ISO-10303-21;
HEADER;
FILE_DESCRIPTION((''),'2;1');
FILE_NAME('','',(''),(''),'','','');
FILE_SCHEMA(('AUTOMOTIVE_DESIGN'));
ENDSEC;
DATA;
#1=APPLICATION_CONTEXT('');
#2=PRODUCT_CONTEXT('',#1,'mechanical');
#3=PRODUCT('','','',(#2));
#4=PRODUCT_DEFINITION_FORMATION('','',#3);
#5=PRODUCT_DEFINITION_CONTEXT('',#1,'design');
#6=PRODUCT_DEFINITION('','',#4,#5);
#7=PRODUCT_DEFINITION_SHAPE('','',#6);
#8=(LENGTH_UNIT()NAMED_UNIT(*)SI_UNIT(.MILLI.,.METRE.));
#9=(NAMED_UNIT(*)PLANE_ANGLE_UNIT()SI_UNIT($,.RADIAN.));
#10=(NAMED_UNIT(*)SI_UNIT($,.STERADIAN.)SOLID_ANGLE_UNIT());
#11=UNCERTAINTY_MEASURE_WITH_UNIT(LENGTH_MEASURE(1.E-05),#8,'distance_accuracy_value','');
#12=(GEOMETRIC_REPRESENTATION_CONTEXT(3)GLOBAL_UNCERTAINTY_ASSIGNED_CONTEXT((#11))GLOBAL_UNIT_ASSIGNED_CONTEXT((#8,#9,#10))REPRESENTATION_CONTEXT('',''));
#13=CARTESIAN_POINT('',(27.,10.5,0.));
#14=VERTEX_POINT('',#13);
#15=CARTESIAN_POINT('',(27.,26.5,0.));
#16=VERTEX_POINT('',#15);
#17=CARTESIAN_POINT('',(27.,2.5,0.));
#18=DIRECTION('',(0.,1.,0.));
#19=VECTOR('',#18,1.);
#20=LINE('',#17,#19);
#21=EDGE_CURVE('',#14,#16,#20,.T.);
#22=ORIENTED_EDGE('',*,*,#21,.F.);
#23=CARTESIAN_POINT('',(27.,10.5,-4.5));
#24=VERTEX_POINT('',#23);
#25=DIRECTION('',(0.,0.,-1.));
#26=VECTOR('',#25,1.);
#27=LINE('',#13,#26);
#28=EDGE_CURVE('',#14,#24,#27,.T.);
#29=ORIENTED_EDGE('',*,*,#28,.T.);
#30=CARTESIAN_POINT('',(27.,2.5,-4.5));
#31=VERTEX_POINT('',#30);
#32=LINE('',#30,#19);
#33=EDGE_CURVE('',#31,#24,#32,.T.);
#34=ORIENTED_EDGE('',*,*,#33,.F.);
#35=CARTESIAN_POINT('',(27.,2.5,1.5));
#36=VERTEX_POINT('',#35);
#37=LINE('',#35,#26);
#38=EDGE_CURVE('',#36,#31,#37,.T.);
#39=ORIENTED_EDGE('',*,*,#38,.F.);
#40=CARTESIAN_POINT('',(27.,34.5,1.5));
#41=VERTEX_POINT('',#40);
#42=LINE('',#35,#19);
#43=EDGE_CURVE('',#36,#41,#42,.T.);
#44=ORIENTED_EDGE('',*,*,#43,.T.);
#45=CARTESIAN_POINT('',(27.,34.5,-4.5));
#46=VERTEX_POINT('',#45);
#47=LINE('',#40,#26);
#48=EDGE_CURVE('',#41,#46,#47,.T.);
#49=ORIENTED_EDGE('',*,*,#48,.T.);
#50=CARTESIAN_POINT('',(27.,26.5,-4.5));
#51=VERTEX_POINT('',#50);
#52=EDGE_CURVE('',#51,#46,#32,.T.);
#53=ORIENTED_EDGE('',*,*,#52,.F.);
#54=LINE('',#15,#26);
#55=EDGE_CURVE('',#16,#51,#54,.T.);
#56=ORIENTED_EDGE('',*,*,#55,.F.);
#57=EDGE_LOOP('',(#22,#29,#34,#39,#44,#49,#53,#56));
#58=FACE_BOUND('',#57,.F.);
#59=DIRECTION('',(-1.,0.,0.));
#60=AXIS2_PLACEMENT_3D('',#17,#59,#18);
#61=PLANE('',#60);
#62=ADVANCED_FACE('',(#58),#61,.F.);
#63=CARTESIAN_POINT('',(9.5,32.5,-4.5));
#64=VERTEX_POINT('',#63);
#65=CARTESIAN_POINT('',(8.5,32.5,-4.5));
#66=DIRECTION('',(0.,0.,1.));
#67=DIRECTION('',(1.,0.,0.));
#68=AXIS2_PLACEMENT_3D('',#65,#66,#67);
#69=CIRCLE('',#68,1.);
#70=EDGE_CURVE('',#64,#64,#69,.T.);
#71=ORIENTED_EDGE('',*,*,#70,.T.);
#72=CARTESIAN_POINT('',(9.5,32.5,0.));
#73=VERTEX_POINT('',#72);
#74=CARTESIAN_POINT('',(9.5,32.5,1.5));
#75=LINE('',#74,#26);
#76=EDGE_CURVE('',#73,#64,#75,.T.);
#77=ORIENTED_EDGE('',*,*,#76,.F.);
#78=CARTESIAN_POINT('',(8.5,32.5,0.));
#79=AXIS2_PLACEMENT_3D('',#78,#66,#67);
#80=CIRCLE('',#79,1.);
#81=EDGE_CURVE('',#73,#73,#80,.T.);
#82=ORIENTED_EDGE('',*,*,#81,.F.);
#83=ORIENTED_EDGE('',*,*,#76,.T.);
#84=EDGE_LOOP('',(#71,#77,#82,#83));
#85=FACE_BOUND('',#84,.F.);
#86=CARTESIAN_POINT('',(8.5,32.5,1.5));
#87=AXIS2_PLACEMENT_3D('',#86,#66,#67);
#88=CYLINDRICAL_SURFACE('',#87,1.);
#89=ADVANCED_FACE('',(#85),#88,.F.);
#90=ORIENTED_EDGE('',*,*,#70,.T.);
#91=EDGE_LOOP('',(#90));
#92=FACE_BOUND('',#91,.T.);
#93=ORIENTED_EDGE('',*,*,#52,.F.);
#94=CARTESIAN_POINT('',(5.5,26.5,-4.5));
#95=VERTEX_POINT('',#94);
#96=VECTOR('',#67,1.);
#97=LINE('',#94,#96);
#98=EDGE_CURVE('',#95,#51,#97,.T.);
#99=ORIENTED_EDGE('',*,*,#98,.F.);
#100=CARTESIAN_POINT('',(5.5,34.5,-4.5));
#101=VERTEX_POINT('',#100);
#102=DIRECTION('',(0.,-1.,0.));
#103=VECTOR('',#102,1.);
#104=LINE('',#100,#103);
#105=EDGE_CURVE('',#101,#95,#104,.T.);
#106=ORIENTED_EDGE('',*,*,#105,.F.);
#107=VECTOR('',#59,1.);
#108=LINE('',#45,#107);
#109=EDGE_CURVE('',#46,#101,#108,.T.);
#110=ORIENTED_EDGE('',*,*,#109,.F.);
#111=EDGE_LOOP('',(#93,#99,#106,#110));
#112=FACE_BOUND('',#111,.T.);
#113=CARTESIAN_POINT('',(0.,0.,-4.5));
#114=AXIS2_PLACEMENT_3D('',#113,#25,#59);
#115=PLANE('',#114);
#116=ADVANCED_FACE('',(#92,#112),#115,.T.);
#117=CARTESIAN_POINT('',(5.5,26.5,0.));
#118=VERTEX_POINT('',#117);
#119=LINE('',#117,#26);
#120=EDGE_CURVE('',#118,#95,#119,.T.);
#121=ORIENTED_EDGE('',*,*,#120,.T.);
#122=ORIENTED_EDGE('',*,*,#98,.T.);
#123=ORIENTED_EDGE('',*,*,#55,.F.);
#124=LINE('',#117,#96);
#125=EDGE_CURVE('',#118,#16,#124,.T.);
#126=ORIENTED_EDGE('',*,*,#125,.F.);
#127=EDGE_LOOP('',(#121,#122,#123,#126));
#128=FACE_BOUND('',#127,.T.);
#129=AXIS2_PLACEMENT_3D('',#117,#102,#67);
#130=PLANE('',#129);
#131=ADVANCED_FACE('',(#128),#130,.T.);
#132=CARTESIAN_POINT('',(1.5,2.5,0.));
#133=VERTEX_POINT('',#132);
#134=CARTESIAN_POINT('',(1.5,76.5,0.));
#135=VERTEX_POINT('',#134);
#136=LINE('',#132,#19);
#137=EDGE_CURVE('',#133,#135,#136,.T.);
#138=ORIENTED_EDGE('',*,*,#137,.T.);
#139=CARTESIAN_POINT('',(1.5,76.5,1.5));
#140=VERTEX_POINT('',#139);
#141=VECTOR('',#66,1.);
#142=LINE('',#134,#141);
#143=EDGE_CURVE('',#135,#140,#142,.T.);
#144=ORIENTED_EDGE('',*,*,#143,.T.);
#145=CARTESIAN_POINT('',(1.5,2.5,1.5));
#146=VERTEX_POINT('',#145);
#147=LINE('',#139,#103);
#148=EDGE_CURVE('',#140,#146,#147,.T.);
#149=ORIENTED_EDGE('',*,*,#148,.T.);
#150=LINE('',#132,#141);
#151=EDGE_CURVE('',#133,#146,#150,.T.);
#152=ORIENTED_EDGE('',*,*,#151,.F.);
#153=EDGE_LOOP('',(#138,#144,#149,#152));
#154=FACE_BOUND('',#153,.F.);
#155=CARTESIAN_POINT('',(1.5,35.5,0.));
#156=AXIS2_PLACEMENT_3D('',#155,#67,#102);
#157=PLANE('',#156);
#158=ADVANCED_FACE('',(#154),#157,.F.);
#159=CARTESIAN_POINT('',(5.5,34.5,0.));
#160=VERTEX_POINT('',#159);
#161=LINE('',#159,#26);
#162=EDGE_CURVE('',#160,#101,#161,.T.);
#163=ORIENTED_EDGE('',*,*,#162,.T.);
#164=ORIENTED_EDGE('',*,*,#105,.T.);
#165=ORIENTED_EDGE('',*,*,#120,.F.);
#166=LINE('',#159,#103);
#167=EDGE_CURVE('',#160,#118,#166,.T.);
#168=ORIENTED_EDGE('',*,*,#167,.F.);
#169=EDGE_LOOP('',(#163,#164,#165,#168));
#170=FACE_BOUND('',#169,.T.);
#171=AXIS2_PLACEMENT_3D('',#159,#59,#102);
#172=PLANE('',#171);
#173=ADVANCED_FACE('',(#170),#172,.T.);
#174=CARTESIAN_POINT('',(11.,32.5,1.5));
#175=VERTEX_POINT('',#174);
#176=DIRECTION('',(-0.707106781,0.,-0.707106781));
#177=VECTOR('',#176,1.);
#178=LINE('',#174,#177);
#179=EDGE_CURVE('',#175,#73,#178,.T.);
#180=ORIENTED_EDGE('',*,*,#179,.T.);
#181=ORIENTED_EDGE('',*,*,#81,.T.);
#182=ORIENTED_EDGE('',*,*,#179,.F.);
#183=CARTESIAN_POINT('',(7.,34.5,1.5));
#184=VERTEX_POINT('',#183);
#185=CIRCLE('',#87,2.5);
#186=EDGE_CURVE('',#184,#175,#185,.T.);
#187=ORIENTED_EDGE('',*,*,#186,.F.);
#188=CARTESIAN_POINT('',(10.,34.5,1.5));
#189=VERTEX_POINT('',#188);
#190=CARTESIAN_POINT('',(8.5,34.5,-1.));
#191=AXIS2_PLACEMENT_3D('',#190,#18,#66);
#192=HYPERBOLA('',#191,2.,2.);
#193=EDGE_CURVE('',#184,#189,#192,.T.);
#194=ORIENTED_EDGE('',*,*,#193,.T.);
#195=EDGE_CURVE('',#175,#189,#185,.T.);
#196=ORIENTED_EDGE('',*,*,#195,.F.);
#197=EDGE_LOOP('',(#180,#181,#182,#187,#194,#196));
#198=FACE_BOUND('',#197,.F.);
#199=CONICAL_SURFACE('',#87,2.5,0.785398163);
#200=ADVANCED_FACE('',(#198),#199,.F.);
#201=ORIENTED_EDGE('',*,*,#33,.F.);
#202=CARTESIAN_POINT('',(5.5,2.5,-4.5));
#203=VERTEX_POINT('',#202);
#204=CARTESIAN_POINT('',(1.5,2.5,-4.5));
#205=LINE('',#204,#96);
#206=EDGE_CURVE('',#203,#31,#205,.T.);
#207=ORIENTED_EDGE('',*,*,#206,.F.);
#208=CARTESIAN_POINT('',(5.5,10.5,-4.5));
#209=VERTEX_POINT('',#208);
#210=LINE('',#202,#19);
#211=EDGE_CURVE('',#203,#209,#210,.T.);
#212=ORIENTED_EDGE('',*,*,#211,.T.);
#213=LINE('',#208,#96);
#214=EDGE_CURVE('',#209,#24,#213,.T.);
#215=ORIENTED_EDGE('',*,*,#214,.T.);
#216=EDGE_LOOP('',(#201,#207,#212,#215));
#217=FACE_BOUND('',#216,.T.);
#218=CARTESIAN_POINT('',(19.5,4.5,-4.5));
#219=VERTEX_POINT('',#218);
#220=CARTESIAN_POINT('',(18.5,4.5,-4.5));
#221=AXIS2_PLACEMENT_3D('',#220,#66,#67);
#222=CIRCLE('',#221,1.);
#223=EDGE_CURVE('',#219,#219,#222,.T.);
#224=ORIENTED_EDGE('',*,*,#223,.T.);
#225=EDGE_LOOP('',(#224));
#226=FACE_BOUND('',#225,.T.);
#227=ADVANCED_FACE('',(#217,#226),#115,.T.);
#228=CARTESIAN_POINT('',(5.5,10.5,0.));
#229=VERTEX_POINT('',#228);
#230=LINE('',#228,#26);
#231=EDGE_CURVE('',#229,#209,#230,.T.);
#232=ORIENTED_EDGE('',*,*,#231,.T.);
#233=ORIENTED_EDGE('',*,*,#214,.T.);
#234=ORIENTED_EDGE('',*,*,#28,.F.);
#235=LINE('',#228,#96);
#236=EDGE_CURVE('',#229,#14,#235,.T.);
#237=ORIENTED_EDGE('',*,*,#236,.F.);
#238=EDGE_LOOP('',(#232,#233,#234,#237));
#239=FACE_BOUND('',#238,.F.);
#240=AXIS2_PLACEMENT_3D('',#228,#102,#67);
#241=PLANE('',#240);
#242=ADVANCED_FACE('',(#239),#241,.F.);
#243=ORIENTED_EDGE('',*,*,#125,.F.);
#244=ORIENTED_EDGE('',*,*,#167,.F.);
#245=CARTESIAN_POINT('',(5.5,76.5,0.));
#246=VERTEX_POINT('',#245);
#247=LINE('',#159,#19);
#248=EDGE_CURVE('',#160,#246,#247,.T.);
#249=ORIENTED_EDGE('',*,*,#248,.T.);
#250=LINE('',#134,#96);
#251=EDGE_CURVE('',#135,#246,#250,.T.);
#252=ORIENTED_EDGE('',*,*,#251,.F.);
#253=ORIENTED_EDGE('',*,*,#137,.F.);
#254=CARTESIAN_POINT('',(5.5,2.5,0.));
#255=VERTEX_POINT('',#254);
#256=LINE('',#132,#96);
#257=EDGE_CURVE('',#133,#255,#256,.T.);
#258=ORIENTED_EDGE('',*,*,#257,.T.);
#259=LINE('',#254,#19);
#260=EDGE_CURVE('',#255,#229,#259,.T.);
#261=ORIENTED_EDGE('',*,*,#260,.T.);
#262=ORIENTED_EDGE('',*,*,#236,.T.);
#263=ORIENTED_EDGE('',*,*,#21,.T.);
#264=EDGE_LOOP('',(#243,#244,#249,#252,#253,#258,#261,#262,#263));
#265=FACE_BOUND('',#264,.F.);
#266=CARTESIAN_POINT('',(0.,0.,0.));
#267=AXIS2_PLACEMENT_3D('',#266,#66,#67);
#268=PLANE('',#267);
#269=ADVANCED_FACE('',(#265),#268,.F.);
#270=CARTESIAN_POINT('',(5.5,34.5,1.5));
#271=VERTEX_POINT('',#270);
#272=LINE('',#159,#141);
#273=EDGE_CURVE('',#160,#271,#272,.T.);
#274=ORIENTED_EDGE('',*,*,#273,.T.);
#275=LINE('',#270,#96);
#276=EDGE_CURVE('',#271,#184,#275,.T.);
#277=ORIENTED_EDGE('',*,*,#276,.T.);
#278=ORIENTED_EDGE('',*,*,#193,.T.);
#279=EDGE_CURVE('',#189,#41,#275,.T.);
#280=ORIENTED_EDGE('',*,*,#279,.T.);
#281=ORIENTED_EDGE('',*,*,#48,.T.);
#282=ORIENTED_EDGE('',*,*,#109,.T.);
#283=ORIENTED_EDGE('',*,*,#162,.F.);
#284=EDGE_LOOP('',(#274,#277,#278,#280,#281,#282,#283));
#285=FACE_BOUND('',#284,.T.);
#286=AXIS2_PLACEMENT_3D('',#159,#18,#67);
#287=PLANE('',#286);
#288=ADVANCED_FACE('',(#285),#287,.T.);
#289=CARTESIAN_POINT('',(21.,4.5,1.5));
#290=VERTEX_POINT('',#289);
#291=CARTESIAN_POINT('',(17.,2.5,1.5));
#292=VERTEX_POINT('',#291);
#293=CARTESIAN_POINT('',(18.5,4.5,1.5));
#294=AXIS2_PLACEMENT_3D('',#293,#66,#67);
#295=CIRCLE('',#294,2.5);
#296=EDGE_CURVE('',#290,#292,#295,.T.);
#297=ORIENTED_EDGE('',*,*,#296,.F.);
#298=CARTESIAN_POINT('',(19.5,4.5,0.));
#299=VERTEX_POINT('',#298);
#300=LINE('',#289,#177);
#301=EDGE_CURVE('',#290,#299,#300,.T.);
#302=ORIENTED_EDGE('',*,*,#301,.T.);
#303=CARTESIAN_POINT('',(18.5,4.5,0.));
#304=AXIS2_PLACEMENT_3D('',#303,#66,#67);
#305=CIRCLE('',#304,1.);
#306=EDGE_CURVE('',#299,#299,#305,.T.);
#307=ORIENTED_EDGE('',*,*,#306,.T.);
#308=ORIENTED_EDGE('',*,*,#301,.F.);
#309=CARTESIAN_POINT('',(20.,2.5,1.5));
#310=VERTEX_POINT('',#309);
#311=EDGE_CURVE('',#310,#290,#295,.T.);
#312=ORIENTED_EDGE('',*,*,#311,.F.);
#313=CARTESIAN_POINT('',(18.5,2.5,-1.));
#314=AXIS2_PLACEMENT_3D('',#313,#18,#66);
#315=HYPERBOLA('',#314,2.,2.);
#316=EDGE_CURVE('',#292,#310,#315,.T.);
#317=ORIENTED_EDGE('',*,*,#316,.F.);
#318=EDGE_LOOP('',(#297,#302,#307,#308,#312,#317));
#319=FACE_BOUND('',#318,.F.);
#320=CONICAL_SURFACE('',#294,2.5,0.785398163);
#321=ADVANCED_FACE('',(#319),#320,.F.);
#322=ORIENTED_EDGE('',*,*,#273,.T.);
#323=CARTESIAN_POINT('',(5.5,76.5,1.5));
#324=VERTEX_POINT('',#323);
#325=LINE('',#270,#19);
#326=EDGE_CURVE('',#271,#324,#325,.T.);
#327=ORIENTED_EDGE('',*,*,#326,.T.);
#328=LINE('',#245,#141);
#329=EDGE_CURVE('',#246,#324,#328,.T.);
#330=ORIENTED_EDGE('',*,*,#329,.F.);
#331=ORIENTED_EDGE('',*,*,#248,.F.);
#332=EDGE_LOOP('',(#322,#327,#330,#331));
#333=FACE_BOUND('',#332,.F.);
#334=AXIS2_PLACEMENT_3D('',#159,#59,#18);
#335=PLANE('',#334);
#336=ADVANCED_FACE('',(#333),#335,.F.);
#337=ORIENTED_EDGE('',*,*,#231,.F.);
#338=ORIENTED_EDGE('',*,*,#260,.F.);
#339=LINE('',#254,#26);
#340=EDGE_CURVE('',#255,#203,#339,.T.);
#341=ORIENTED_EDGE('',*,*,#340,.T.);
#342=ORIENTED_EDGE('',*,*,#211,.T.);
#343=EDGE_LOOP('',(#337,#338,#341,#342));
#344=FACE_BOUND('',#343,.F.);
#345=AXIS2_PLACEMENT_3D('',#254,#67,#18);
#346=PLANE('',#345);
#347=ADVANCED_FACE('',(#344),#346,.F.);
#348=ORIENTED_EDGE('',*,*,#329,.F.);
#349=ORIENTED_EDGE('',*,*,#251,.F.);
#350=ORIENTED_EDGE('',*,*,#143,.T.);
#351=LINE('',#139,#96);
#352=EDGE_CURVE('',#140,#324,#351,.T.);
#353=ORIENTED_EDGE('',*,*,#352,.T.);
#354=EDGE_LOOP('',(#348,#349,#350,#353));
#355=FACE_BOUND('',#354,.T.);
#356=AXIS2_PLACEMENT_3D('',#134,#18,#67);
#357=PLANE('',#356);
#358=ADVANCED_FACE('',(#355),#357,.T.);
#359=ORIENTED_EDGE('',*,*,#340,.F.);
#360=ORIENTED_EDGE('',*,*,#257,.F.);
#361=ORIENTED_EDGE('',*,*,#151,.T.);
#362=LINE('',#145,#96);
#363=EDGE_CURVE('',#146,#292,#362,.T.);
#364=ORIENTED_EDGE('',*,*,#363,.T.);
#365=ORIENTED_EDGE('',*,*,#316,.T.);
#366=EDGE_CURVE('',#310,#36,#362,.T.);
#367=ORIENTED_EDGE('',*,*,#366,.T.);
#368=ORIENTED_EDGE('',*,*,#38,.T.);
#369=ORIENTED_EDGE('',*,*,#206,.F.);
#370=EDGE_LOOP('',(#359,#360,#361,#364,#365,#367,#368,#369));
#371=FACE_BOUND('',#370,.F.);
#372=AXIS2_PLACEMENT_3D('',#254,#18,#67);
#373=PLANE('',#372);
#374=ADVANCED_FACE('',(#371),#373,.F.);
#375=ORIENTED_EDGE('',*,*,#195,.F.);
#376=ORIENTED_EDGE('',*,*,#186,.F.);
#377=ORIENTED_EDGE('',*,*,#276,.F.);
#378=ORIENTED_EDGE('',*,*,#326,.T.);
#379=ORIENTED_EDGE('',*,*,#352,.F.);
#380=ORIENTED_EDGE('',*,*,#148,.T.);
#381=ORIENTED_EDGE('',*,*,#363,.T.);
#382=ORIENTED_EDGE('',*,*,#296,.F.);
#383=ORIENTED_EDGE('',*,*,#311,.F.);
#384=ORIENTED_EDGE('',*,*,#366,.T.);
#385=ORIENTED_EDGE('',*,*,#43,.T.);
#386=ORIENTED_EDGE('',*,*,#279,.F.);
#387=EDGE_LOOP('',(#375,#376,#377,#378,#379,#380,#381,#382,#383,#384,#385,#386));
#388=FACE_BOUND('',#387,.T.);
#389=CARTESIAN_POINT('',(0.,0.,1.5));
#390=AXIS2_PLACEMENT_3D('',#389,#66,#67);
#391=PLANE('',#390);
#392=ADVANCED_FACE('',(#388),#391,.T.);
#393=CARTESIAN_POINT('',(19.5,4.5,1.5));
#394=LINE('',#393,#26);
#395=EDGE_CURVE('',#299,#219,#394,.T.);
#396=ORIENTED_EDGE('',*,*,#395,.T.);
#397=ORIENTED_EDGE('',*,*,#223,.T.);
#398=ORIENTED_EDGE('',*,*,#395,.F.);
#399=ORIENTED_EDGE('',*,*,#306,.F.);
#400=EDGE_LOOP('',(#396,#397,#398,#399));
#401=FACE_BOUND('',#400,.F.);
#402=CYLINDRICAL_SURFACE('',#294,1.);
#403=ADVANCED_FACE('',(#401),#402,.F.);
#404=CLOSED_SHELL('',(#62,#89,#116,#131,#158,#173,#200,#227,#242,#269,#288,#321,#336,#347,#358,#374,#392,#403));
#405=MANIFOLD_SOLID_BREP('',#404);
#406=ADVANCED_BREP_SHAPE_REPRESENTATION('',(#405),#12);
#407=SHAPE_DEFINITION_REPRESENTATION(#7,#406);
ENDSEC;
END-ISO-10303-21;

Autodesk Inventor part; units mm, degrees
ref_plane "YZ Plane" through (0, 0, 0) normal (1, 0, 0) x (0, 1, 0)
ref_plane "XZ Plane" through (0, 0, 0) normal (0, 1, 0) x (-1, 0, 0)
ref_plane "XY Plane" through (0, 0, 0) normal (0, 0, 1) x (1, 0, 0)
sketch "Sketch1" plane through (0, 0, 0) normal (0, 0, 1) x (1, 0, 0)
  line L0 (5.5, 34.5) -> (27, 34.5)
  line L1 (1.5, 2.5) -> (27, 2.5)
  line L2 (27, 2.5) -> (27, 34.5)
  line L3 (27, 34.5) -> (5.5, 34.5)
  line L4 (1.5, 35.5) -> (1.5, 2.5)
  line L5 (1.5, 76.5) -> (5.5, 76.5)
  line L6 (1.5, 2.5) -> (5.5, 2.5)
  line L7 (5.5, 34.5) -> (5.5, 76.5)
  line L8 (5.5, 76.5) -> (1.5, 76.5)
  line L9 (1.5, 76.5) -> (1.5, 2.5)
  point P0 (0, 0)
  dimension "d0" = 32
  dimension "d2" = 21.5
  dimension "d3" = 42
  dimension "d17" = 4
extrude "Extrusion1" add sketch "Sketch1" along normal blind 1.5
sketch "Sketch2" plane through (0, 0, 0) normal (0, 0, -1) x (-1, 0, 0)
  line L0 (-27, 2.5) -> (-27, 34.5) projected
  line L1 (-27, 34.5) -> (-5.5, 34.5)
  line L2 (-5.5, 34.5) -> (-5.5, 26.5)
  line L3 (-5.5, 26.5) -> (-27, 26.5)
  line L4 (-27, 26.5) -> (-27, 34.5)
  line L5 (-1.5, 2.5) -> (-27, 2.5) projected
  line L6 (-27, 2.5) -> (-5.5, 2.5)
  line L7 (-5.5, 2.5) -> (-5.5, 10.5)
  line L8 (-5.5, 10.5) -> (-27, 10.5)
  line L9 (-27, 10.5) -> (-27, 2.5)
  point P0 (0, 0)
  point P1 (-27, 10.5)
  point P2 (-27, 26.5)
  dimension "d6" = 16
extrude "Extrusion2" add sketch "Sketch2" along normal blind 4.5
sketch "Sketch3" plane through (0, 0, 1.5) normal (0, 0, 1) x (1, 0, 0)
  circle A0 centre (8.5, 32.5) radius 1
  circle A1 centre (18.5, 4.5) radius 1
  line L0 (27, 2.5) -> (27, 34.5) projected
  line L1 (1.5, 2.5) -> (27, 2.5) projected
  line L2 (27, 34.5) -> (5.5, 34.5) projected
  point P0 (0, 0)
  dimension "d9" = 2
  dimension "d10" = 2
  dimension "d11" = 18.5
  dimension "d12" = 8.5
  dimension "d13" = 2
  dimension "d14" = 2
extrude "Extrusion3" cut sketch "Sketch3" against normal through all
chamfer "Chamfer1" distance 1.5 angle 45 2 edges at (7.5, 32.5, 1.5) (17.5, 4.5, 1.5)
properties part number "servoholder"
